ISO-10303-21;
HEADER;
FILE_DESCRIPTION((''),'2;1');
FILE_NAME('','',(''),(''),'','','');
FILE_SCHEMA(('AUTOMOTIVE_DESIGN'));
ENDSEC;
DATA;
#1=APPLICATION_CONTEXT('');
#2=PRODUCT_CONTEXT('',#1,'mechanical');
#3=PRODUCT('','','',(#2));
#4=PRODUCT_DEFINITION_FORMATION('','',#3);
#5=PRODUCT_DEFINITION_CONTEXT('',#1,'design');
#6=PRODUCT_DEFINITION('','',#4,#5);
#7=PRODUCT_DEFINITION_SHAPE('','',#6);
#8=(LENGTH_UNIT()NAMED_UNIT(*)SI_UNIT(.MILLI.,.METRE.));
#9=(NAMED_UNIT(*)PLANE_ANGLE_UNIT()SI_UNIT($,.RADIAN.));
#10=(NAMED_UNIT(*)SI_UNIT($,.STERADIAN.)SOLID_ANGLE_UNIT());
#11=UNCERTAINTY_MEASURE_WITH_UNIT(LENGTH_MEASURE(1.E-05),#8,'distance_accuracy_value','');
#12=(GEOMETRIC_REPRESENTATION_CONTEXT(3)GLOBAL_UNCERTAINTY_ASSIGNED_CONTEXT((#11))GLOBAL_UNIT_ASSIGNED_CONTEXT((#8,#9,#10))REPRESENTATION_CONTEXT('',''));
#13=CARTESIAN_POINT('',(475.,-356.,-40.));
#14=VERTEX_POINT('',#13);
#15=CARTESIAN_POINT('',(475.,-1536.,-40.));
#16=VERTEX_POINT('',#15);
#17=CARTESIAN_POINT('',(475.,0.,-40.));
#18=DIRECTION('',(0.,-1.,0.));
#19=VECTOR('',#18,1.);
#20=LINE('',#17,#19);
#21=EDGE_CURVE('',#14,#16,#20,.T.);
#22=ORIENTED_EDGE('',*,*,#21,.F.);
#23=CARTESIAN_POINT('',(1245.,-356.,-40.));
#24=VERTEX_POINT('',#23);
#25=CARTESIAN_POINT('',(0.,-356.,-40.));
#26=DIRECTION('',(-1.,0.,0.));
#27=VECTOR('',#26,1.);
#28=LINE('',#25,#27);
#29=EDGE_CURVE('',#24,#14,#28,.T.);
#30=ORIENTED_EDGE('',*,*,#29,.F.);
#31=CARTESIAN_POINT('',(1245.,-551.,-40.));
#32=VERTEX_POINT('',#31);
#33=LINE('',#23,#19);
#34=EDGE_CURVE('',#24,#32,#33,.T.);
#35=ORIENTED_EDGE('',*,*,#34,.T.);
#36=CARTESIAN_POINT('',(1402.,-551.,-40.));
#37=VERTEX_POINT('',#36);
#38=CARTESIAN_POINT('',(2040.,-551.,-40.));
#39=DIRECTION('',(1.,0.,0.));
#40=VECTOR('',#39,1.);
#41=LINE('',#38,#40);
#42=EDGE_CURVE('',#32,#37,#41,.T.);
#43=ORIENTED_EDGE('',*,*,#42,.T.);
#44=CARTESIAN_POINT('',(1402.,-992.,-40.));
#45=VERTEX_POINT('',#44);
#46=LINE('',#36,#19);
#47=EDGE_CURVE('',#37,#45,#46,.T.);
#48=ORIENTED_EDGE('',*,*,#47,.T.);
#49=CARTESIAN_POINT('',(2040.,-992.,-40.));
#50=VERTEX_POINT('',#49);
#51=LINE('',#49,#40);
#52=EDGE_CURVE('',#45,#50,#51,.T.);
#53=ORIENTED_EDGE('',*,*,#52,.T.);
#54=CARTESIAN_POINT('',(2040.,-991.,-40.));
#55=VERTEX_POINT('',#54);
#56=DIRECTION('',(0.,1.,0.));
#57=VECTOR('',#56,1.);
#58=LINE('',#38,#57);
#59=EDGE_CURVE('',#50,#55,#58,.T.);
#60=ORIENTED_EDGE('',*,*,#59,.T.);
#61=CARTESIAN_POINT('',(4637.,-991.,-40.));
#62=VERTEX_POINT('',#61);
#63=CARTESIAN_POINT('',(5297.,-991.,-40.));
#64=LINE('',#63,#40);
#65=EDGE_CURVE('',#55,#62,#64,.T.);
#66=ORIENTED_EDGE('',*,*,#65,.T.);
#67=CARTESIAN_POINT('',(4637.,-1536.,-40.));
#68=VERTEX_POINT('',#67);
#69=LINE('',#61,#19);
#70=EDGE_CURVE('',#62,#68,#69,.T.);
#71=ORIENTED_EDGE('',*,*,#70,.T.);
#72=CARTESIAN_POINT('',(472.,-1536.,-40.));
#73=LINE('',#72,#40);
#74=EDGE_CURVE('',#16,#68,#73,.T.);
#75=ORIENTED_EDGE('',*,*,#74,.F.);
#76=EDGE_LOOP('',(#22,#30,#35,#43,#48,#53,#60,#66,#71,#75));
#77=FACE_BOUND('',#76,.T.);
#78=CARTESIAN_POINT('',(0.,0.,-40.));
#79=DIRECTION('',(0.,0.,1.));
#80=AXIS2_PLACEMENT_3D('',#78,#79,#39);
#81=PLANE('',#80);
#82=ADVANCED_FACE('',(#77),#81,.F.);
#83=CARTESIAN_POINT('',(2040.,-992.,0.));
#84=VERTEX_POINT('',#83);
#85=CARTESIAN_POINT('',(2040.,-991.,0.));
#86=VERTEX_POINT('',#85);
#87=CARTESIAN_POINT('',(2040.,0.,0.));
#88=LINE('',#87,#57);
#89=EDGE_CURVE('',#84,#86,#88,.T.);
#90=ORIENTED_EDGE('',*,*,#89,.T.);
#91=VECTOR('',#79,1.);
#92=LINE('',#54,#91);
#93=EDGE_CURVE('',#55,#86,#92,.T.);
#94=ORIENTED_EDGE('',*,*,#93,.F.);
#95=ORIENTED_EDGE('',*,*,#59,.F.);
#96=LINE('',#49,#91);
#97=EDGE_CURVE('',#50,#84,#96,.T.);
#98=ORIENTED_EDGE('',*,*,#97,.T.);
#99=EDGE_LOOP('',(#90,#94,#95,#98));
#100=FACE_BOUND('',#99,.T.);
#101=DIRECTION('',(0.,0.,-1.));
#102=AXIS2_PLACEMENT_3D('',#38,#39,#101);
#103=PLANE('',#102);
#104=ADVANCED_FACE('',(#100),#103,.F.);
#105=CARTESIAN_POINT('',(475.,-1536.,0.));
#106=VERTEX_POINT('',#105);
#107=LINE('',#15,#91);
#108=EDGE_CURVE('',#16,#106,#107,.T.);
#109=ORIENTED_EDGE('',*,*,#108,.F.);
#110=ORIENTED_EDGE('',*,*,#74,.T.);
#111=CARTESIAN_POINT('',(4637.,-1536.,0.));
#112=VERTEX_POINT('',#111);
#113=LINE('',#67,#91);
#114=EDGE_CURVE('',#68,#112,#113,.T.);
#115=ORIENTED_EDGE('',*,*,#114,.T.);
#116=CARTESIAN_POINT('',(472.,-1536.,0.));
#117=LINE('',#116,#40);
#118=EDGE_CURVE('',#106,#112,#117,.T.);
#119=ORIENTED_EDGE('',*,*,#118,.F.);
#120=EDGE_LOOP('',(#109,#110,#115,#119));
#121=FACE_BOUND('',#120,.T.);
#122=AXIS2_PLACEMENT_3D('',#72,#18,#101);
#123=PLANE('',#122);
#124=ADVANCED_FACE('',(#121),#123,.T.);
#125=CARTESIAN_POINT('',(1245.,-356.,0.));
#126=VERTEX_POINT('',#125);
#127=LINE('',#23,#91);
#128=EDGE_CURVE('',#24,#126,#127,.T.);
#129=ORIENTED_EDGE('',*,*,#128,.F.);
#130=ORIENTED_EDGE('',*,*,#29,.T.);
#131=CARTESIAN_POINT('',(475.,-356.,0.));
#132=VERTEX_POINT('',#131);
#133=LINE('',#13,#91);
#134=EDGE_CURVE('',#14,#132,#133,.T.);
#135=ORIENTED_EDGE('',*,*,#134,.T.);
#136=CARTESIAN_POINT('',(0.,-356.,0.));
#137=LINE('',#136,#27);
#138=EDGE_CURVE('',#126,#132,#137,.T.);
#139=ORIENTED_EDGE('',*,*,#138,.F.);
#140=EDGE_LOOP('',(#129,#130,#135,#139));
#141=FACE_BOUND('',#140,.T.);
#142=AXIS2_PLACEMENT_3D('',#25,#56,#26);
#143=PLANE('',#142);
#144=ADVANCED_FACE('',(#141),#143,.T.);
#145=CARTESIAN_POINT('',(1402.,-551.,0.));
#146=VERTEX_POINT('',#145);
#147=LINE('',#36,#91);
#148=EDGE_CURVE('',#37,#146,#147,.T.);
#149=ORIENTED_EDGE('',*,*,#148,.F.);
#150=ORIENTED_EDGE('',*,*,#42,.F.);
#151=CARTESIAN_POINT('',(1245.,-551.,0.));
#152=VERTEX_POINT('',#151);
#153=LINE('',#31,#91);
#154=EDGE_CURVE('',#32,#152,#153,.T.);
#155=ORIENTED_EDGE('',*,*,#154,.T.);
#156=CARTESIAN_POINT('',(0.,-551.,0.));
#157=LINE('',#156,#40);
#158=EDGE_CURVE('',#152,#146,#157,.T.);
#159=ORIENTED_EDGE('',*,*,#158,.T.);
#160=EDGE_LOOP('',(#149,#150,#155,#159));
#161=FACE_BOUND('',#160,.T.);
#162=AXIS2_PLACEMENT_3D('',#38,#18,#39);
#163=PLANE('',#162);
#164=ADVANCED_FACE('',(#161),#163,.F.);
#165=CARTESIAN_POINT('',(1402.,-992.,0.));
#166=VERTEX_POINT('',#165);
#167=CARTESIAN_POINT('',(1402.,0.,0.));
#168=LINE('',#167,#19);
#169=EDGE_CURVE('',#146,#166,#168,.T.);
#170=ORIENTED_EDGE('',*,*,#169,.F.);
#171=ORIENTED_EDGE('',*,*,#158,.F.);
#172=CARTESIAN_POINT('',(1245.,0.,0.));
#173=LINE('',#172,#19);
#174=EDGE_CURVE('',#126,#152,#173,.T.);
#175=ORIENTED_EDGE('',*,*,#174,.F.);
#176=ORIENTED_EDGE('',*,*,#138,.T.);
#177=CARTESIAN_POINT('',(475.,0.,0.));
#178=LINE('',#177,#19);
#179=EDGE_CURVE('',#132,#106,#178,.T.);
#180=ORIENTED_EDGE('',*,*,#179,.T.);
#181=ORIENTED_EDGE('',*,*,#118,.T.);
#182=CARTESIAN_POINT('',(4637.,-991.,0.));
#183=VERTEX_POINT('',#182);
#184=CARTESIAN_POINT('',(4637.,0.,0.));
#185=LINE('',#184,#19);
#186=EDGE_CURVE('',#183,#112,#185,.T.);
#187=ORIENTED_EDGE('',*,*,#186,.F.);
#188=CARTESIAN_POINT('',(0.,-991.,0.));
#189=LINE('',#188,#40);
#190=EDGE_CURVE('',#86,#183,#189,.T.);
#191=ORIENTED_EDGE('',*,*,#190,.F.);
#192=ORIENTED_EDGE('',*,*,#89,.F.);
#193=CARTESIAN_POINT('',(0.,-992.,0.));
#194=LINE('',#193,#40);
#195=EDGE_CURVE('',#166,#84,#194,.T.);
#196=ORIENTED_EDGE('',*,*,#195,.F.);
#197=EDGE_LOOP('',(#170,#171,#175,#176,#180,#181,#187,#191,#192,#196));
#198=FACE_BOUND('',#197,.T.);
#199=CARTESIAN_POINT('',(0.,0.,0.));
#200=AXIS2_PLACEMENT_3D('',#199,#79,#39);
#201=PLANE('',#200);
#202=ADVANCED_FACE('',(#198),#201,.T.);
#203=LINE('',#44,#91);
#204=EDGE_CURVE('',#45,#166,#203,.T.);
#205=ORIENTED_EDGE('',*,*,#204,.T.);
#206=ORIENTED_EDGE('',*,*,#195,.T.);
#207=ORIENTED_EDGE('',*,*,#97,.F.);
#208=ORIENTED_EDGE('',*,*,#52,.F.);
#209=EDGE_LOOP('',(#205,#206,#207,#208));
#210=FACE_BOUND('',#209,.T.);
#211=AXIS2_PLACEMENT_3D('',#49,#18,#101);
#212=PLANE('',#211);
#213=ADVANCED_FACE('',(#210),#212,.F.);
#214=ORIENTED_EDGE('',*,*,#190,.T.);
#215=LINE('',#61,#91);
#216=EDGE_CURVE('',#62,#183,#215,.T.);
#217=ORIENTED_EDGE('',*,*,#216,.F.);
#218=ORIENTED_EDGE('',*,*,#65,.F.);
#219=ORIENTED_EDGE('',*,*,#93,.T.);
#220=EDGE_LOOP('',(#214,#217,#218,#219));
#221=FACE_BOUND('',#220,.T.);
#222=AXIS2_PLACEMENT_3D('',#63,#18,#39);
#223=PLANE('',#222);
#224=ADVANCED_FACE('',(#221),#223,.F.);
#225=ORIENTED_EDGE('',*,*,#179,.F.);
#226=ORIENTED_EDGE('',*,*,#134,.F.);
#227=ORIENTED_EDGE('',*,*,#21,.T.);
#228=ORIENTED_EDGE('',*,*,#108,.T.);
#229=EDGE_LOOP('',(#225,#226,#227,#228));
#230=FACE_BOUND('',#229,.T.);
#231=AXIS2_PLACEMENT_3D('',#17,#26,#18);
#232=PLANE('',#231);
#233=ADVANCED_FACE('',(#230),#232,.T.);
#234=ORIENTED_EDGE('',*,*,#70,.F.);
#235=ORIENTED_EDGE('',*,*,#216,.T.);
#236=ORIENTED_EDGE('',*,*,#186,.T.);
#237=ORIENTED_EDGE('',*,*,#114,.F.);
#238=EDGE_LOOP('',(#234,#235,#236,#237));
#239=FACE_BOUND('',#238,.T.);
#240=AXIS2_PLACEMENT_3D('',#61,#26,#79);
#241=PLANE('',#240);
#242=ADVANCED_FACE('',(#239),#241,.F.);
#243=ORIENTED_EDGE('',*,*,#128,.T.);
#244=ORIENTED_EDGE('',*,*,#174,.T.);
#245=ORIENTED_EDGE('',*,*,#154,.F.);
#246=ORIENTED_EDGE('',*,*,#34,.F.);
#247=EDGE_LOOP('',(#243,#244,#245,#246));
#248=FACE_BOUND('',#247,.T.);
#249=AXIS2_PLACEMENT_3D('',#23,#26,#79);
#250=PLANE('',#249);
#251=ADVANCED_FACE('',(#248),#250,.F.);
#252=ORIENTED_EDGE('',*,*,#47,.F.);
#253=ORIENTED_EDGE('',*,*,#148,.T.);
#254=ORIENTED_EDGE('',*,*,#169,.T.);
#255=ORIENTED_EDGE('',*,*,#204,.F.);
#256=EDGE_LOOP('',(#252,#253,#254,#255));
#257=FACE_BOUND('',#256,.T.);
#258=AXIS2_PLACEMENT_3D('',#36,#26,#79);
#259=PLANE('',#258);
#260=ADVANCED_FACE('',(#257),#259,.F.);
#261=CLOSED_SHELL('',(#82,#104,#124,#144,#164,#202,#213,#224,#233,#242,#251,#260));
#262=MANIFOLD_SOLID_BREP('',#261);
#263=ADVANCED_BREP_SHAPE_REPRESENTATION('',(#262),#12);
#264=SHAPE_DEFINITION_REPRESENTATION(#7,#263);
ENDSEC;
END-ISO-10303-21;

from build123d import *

# Parameters (mm, degrees)
TABAN_FLAN_1_DEPTH          = 40
KES_EKSTR_ZYON1_DEPTH       = 6196.554858122
KES_EKSTR_ZYON1_DEPTH_BACK  = 6196.554858122
IZIM6_W                     = 472
IZIM6_H                     = 278
IZIM7_W                     = 6002
IZIM7_H                     = 9
SEKME1_DEPTH                = 40
KES_EKSTR_ZYON2_DEPTH       = 6196.554858122
KES_EKSTR_ZYON2_DEPTH_BACK  = 6196.554858122
IZIM8_W                     = 475
IZIM8_H                     = 280
KES_EKSTR_ZYON3_DEPTH       = 6196.554858122
KES_EKSTR_ZYON3_DEPTH_BACK  = 6196.554858122
IZIM10_W                    = 475
IZIM10_H                    = 50
KES_EKSTR_ZYON4_DEPTH       = 6196.554858122
KES_EKSTR_ZYON4_DEPTH_BACK  = 6196.554858122
KES_EKSTR_ZYON5_DEPTH       = 5516.351756688
KES_EKSTR_ZYON5_DEPTH_BACK  = 5516.351756688
IZIM12_W                    = 1305
IZIM12_H                    = 635
KES_EKSTR_ZYON6_DEPTH       = 5516.351756688
KES_EKSTR_ZYON6_DEPTH_BACK  = 5516.351756688
IZIM13_W                    = 1515
IZIM13_H                    = 635
KES_EKSTR_ZYON7_DEPTH       = 5516.351756688
KES_EKSTR_ZYON7_DEPTH_BACK  = 5516.351756688
KES_EKSTR_ZYON8_DEPTH       = 5045.692359302
KES_EKSTR_ZYON8_DEPTH_BACK  = 5045.692359302
IZIM15_W                    = 437
IZIM15_H                    = 635
KES_EKSTR_ZYON9_DEPTH       = 5045.692359302
KES_EKSTR_ZYON9_DEPTH_BACK  = 5045.692359302
IZIM16_W                    = 795
IZIM16_H                    = 195
IZIM16_W_2                  = 168
IZIM16_H_2                  = 545
KES_EKSTR_ZYON10_DEPTH      = 4885.942681342
KES_EKSTR_ZYON10_DEPTH_BACK = 4885.942681342
IZIM17_W                    = 638
IZIM17_H                    = 441


# Sheet-metal steps are written as plain solids
with BuildPart() as part:
    # Çizim1 → Taban-Flanş1 (new body)
    with BuildSketch(Plane.XY):
        Polygon((0, 0), (0, -964), (472, -964), (472, -1536), (6002, -1536), (6002, 0), align=None)
    extrude(amount=-TABAN_FLAN_1_DEPTH)

    # Çizim6 → Kes-Ekstrüzyon1 (cut, two sides: drawn at the far end of the back side and taken through both)
    with BuildSketch(Plane.XY.offset(-KES_EKSTR_ZYON1_DEPTH_BACK)):
        with Locations((236, -825)):
            Rectangle(IZIM6_W, IZIM6_H)
        Polygon((472, -686), (472, -964), (472, -1536), (475, -1536), (475, -686), align=None)
    extrude(amount=KES_EKSTR_ZYON1_DEPTH + KES_EKSTR_ZYON1_DEPTH_BACK, mode=Mode.SUBTRACT)

    # Çizim7 → Sekme1 (add)
    with BuildSketch(Plane.XY):
        with Locations((3001, 4.5)):
            Rectangle(IZIM7_W, IZIM7_H)
    extrude(amount=-SEKME1_DEPTH)

    # Çizim8 → Kes-Ekstrüzyon2 (cut, two sides: drawn at the far end of the back side and taken through both)
    with BuildSketch(Plane.XY.offset(-KES_EKSTR_ZYON2_DEPTH_BACK)):
        with Locations((237.5, -546)):
            Rectangle(IZIM8_W, IZIM8_H)
    extrude(amount=KES_EKSTR_ZYON2_DEPTH + KES_EKSTR_ZYON2_DEPTH_BACK, mode=Mode.SUBTRACT)

    # Çizim10 → Kes-Ekstrüzyon3 (cut, two sides: drawn at the far end of the back side and taken through both)
    with BuildSketch(Plane.XY.offset(-KES_EKSTR_ZYON3_DEPTH_BACK)):
        Polygon((6002, -356), (6002, 9), (0, 9), (0, -356), (475, -356), align=None)
        with Locations((237.5, -381)):
            Rectangle(IZIM10_W, IZIM10_H)
    extrude(amount=KES_EKSTR_ZYON3_DEPTH + KES_EKSTR_ZYON3_DEPTH_BACK, mode=Mode.SUBTRACT)

    # Çizim11 → Kes-Ekstrüzyon4 (cut, two sides: drawn at the far end of the back side and taken through both)
    with BuildSketch(Plane.XY.offset(-KES_EKSTR_ZYON4_DEPTH_BACK)):
        Polygon((5297, -356), (5297, -1349), (5207, -1349), (5207, -1536), (6002, -1536), (6002, -356), align=None)
    extrude(amount=KES_EKSTR_ZYON4_DEPTH + KES_EKSTR_ZYON4_DEPTH_BACK, mode=Mode.SUBTRACT)

    # Çizim12 → Kes-Ekstrüzyon5 (cut, two sides: drawn at the far end of the back side and taken through both)
    with BuildSketch(Plane.XY.offset(-KES_EKSTR_ZYON5_DEPTH_BACK)):
        with Locations((4644.5, -673.5)):
            Rectangle(IZIM12_W, IZIM12_H)
    extrude(amount=KES_EKSTR_ZYON5_DEPTH + KES_EKSTR_ZYON5_DEPTH_BACK, mode=Mode.SUBTRACT)

    # Çizim13 → Kes-Ekstrüzyon6 (cut, two sides: drawn at the far end of the back side and taken through both)
    with BuildSketch(Plane.XY.offset(-KES_EKSTR_ZYON6_DEPTH_BACK)):
        with Locations((3234.5, -673.5)):
            Rectangle(IZIM13_W, IZIM13_H)
    extrude(amount=KES_EKSTR_ZYON6_DEPTH + KES_EKSTR_ZYON6_DEPTH_BACK, mode=Mode.SUBTRACT)

    # Çizim14 → Kes-Ekstrüzyon7 (cut, two sides: drawn at the far end of the back side and taken through both)
    with BuildSketch(Plane.XY.offset(-KES_EKSTR_ZYON7_DEPTH_BACK)):
        Polygon((4805, -991), (4805, -1536), (5297, -1547.167726618), (5297, -991), align=None)
    extrude(amount=KES_EKSTR_ZYON7_DEPTH + KES_EKSTR_ZYON7_DEPTH_BACK, mode=Mode.SUBTRACT)

    # Çizim15 → Kes-Ekstrüzyon8 (cut, two sides: drawn at the far end of the back side and taken through both)
    with BuildSketch(Plane.XY.offset(-KES_EKSTR_ZYON8_DEPTH_BACK)):
        with Locations((2258.5, -673.5)):
            Rectangle(IZIM15_W, IZIM15_H)
    extrude(amount=KES_EKSTR_ZYON8_DEPTH + KES_EKSTR_ZYON8_DEPTH_BACK, mode=Mode.SUBTRACT)

    # Çizim16 → Kes-Ekstrüzyon9 (cut, two sides: drawn at the far end of the back side and taken through both)
    with BuildSketch(Plane.XY.offset(-KES_EKSTR_ZYON9_DEPTH_BACK)):
        with Locations((1642.5, -453.5)):
            Rectangle(IZIM16_W, IZIM16_H)
        with Locations((4721, -1263.5)):
            Rectangle(IZIM16_W_2, IZIM16_H_2)
    extrude(amount=KES_EKSTR_ZYON9_DEPTH + KES_EKSTR_ZYON9_DEPTH_BACK, mode=Mode.SUBTRACT)

    # Çizim17 → Kes-Ekstrüzyon10 (cut, two sides: drawn at the far end of the back side and taken through both)
    with BuildSketch(Plane.XY.offset(-KES_EKSTR_ZYON10_DEPTH_BACK)):
        with Locations((1721, -771.5)):
            Rectangle(IZIM17_W, IZIM17_H)
    extrude(amount=KES_EKSTR_ZYON10_DEPTH + KES_EKSTR_ZYON10_DEPTH_BACK, mode=Mode.SUBTRACT)


solid = part.part
